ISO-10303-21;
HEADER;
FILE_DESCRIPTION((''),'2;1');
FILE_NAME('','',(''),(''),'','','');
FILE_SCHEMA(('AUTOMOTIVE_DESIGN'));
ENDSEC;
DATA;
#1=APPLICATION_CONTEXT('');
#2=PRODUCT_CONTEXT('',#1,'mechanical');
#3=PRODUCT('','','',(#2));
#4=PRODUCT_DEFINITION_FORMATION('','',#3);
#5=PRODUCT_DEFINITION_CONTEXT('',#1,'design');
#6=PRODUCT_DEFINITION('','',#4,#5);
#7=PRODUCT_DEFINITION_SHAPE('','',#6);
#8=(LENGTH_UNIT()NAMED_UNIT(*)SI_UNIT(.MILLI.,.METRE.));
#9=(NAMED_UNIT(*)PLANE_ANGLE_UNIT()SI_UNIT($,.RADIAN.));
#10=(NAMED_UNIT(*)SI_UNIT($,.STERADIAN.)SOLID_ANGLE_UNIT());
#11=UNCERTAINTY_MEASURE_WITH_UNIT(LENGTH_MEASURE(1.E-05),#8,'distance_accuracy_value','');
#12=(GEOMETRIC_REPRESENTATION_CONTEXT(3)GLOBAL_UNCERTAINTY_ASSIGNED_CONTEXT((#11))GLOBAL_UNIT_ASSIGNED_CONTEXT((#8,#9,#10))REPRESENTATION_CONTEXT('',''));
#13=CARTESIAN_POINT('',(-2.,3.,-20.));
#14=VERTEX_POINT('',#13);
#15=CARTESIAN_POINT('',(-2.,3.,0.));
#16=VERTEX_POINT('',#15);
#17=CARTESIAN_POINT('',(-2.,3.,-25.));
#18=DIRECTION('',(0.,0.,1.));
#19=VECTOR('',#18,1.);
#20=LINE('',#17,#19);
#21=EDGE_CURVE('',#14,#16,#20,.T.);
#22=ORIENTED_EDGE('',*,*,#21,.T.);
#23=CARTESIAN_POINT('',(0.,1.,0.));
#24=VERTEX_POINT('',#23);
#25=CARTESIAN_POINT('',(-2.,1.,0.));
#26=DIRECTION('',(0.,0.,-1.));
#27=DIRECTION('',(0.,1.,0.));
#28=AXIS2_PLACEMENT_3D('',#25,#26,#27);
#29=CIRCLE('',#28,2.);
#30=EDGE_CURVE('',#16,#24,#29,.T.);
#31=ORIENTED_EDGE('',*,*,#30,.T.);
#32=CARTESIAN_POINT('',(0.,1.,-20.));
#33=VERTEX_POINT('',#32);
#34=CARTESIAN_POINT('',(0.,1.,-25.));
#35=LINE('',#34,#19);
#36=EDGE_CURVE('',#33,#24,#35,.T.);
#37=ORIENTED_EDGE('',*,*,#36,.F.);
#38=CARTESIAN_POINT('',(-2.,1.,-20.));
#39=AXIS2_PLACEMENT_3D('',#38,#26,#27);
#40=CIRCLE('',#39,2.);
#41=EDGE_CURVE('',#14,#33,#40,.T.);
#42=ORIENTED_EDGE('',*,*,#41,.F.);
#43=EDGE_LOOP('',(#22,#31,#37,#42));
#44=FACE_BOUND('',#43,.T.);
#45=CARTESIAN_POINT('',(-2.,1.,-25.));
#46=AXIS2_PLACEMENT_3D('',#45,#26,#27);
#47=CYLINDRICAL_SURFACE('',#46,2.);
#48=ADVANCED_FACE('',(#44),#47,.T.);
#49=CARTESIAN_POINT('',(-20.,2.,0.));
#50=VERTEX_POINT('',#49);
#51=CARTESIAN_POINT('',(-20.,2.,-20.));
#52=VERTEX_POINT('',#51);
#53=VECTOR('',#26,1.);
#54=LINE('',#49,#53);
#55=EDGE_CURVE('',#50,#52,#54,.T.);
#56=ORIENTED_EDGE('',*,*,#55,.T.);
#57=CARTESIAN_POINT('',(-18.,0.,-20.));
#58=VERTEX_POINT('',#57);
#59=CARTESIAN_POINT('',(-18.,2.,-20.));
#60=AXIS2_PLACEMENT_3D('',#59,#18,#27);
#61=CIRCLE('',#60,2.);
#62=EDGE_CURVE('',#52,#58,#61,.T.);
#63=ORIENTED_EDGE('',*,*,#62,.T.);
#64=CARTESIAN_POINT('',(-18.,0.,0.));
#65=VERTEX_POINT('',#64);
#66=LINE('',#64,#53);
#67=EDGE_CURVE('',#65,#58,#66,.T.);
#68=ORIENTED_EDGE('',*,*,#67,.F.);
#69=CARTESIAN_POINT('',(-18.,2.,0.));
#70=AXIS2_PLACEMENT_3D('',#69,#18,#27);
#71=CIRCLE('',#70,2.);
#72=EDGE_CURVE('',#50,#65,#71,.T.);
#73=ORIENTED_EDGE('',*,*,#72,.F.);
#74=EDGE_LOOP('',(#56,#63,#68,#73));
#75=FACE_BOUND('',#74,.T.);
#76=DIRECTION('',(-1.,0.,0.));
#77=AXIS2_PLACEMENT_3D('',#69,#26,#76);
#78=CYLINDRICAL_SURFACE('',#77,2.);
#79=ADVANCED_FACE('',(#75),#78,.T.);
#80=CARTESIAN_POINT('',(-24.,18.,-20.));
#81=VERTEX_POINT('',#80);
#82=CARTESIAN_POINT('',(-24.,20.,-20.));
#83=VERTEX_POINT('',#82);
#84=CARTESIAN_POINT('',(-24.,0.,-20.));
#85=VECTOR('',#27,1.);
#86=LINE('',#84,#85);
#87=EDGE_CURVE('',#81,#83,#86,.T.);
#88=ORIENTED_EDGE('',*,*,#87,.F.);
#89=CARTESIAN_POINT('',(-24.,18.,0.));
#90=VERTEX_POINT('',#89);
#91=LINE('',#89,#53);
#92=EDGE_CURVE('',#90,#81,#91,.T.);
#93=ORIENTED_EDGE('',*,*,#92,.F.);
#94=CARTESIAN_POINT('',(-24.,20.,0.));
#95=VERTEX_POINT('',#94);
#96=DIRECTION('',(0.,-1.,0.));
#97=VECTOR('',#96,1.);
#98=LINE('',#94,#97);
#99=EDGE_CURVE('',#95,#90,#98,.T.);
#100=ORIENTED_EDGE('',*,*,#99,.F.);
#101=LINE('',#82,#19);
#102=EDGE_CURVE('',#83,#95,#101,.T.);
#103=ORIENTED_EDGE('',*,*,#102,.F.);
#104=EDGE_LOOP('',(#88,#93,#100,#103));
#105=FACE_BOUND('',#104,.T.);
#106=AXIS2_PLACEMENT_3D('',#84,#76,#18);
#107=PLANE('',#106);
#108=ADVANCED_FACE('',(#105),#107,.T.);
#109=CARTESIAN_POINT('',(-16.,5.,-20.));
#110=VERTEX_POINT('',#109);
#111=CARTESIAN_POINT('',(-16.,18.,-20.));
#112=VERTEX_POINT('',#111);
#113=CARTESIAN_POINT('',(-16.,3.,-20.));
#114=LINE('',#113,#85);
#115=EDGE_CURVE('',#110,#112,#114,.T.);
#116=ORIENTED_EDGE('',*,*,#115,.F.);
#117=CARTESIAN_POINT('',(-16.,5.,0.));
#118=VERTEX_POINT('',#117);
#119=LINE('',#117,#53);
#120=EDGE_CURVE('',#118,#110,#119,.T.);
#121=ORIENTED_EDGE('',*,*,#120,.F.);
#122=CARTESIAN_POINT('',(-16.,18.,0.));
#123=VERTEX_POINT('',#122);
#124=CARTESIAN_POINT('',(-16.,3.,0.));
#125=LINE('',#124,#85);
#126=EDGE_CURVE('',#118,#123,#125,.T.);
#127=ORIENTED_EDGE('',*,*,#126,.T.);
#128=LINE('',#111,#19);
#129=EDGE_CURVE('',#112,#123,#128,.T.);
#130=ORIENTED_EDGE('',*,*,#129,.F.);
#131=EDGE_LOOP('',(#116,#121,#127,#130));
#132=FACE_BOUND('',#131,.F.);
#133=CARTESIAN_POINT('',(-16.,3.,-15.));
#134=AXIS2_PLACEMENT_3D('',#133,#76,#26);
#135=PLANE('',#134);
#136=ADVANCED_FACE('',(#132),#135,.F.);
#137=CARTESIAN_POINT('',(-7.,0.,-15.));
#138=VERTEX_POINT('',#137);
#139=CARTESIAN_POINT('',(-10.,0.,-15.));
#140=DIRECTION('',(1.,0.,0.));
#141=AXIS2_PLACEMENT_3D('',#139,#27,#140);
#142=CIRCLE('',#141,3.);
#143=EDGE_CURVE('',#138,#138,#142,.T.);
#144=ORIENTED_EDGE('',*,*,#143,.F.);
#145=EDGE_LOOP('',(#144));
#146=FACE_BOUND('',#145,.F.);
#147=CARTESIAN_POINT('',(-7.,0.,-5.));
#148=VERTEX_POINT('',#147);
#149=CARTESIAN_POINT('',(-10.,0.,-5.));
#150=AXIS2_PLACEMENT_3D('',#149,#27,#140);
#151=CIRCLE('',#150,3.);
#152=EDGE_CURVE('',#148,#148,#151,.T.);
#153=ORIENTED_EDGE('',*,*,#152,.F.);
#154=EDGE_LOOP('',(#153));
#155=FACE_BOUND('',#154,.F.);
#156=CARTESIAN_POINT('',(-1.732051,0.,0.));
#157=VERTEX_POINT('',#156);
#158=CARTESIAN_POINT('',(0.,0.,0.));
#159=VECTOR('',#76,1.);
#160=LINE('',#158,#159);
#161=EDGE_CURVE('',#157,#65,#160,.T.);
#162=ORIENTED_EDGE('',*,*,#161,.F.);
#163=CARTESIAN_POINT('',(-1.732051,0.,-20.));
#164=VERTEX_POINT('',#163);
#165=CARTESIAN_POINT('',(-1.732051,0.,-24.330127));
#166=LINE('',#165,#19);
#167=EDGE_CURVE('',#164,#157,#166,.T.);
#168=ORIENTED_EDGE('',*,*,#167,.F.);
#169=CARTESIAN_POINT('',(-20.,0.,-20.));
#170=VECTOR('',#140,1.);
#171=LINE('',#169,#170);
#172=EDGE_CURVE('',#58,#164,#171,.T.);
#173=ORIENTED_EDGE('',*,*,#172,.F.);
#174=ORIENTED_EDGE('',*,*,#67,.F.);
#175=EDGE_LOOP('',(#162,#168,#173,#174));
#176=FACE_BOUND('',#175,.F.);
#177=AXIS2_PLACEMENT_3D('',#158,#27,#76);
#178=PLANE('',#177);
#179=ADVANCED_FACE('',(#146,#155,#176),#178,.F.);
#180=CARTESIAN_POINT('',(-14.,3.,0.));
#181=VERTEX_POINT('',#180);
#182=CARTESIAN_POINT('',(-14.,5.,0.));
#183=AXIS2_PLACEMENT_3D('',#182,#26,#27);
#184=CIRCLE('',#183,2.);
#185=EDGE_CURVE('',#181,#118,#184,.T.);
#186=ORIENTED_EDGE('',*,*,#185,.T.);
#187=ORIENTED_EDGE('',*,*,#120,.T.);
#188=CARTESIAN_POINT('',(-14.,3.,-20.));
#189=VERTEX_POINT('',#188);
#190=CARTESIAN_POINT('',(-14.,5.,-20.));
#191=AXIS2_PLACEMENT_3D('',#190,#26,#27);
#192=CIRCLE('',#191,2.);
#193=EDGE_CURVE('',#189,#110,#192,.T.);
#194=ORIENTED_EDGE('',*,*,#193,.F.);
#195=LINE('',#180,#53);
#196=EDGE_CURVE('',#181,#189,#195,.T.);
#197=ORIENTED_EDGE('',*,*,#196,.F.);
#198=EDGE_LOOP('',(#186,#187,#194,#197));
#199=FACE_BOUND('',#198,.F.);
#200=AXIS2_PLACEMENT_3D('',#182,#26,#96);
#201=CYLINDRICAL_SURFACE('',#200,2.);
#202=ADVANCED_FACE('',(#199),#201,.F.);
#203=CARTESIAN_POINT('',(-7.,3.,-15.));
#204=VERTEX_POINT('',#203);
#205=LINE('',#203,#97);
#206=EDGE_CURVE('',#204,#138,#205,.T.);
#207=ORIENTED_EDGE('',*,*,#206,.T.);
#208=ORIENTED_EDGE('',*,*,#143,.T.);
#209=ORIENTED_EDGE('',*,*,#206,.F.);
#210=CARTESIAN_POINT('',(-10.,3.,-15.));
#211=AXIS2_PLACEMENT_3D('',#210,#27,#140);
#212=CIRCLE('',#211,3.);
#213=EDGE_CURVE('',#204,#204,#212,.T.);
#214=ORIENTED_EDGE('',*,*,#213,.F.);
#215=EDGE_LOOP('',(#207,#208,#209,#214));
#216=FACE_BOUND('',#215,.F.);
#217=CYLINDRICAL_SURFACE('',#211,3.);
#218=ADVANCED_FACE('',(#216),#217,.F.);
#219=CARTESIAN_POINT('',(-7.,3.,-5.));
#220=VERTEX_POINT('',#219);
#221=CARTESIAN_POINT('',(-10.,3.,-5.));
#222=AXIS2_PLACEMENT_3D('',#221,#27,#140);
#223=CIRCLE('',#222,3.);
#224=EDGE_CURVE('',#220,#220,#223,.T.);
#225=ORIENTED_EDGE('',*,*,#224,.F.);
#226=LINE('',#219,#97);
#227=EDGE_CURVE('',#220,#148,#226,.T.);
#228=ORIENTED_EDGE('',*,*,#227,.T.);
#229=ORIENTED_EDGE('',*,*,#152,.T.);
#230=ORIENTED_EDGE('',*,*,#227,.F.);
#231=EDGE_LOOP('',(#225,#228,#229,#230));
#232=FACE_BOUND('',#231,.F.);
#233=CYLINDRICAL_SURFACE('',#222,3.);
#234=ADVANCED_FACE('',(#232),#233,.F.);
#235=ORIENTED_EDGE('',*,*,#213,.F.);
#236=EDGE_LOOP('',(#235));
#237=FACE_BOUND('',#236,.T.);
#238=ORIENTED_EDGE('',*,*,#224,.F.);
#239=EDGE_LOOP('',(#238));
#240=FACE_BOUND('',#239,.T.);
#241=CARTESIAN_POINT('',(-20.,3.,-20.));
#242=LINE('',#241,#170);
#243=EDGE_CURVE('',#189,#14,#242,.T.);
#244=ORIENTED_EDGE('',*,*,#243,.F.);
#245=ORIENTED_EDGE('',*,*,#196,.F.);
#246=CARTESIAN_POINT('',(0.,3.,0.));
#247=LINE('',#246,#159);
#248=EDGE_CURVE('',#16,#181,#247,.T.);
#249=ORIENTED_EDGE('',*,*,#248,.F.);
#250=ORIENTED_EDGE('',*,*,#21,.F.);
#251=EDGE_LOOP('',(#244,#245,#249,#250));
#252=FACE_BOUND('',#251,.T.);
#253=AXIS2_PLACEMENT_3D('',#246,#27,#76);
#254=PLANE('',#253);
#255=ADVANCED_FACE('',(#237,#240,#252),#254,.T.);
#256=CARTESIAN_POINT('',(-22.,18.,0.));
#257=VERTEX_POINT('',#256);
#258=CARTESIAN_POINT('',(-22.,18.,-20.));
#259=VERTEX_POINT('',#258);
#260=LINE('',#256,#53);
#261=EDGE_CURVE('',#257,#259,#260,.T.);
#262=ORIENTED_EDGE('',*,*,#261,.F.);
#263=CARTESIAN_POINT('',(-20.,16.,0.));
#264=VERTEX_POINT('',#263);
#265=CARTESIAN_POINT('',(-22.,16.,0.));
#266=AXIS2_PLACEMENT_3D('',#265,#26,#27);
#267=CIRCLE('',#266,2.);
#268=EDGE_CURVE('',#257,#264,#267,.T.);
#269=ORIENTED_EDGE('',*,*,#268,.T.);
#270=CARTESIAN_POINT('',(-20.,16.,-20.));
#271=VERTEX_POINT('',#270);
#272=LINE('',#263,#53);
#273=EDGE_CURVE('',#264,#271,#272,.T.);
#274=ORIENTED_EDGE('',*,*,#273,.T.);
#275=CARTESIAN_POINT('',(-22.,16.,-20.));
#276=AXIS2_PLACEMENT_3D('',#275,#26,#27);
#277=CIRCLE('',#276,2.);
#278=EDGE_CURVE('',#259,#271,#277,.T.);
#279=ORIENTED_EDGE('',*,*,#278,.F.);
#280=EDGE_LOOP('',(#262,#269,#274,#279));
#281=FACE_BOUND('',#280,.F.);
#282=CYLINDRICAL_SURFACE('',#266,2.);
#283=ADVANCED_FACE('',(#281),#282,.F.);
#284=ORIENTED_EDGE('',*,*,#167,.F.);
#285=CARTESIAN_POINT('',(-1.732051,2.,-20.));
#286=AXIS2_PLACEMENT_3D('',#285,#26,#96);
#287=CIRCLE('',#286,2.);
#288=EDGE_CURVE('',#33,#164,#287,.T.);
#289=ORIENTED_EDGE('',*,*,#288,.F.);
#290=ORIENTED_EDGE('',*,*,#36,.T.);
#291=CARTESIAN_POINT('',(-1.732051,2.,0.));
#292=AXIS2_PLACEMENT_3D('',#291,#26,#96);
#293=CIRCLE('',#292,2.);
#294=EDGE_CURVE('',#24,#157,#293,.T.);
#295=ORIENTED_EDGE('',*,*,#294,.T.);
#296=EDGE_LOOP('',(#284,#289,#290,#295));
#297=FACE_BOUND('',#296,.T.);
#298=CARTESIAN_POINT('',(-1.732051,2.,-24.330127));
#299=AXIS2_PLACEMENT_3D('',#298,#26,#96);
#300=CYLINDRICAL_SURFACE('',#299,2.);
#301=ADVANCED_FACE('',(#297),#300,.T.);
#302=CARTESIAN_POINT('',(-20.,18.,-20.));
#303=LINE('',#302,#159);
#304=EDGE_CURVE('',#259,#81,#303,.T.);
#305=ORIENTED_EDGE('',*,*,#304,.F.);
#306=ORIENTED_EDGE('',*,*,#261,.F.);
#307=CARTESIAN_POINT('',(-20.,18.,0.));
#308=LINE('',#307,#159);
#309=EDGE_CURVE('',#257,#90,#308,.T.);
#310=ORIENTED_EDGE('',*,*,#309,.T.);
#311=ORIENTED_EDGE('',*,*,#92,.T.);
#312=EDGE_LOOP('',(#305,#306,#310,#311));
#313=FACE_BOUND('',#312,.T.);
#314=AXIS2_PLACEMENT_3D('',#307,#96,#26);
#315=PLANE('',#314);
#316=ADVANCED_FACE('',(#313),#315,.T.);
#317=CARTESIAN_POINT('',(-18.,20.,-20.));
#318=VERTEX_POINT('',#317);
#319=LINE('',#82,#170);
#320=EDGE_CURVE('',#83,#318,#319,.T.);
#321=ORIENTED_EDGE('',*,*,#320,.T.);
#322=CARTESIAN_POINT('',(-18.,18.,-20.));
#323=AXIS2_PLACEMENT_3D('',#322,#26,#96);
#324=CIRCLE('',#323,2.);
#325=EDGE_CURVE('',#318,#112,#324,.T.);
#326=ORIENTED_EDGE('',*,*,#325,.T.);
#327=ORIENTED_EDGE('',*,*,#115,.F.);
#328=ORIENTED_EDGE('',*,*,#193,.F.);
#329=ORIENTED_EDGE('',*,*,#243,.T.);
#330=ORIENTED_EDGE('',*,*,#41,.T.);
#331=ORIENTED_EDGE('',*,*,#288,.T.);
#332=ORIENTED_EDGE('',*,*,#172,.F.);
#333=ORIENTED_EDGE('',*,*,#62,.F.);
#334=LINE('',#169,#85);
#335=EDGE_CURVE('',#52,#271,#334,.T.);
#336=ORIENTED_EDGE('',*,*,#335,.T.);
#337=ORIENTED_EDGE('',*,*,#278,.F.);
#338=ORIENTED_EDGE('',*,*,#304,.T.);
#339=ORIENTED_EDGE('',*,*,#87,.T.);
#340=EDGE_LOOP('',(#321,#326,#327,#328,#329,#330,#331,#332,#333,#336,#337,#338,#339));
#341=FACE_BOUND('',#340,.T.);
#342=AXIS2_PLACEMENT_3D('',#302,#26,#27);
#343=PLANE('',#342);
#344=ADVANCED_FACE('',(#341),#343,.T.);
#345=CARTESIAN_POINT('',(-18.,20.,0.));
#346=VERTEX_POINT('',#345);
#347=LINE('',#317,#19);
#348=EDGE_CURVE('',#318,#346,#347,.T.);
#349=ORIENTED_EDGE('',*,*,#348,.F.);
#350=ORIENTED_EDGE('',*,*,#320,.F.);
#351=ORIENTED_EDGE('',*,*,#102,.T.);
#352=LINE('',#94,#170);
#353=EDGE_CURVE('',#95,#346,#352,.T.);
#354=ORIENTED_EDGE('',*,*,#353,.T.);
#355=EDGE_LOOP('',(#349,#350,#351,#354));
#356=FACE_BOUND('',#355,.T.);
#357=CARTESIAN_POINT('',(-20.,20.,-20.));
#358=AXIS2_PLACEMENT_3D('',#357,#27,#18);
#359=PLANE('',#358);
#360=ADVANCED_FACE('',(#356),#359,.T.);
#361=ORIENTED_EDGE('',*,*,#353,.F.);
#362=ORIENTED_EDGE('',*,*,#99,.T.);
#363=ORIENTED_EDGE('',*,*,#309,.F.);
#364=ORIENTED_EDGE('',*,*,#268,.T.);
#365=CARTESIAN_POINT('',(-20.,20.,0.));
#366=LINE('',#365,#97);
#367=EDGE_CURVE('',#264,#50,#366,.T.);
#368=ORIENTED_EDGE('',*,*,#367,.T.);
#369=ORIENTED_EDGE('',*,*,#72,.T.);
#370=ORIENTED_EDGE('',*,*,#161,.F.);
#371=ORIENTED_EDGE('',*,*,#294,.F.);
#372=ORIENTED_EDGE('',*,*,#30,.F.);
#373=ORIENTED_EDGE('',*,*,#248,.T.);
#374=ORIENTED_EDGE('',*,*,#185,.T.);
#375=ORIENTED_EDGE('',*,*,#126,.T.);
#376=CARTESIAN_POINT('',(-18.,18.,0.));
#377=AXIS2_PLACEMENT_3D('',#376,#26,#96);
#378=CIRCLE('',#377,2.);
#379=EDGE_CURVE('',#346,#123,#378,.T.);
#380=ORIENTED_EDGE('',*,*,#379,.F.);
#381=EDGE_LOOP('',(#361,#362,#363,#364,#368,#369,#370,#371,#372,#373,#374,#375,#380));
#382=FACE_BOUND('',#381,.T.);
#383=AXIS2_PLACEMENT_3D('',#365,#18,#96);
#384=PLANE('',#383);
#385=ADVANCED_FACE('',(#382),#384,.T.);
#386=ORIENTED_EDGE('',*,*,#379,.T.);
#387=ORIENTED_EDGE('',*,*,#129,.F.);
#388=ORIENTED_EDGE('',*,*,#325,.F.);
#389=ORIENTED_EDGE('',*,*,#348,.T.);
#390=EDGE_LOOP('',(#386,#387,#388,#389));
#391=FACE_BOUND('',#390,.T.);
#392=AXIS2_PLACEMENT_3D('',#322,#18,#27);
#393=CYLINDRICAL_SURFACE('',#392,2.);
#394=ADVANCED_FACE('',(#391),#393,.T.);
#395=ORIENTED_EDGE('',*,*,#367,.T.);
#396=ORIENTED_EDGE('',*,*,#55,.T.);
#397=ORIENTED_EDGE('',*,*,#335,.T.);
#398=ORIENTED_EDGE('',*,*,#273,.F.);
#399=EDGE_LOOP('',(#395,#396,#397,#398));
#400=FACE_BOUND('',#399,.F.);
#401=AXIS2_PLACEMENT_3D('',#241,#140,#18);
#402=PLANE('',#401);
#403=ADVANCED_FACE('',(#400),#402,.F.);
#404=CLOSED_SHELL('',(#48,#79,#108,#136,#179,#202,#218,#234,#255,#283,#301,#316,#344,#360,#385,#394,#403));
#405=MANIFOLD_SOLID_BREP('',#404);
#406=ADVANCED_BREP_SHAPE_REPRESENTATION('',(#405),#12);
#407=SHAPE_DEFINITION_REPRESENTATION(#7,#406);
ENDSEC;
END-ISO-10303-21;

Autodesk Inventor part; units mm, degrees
ref_plane "YZ Plane" through (0, 0, 0) normal (1, 0, 0) x (0, 1, 0)
ref_plane "XZ Plane" through (0, 0, 0) normal (0, 1, 0) x (-1, 0, 0)
ref_plane "XY Plane" through (0, 0, 0) normal (0, 0, 1) x (1, 0, 0)
sketch "Sketch1" plane through (0, 0, 0) normal (0, 1, 0) x (-1, 0, 0)
  line L0 (0, 0) -> (20, 0)
  line L1 (20, 0) -> (20, -20)
  line L2 (20, -20) -> (0, -20)
  line L3 (0, -20) -> (0, 0)
  dimension "d0" = 20
  dimension "d1" = 20
extrude "Extrusion1" add sketch "Sketch1" along normal blind 3
sketch "Sketch2" plane through (0, 3, 0) normal (0, 1, 0) x (1, 0, 0)
  circle A0 centre (-10, 15) radius 3
  line L0 (0, 0) -> (0, 20) projected
  line L1 (0, 20) -> (-20, 20) projected
  circle A1 centre (-10, 5) radius 3
  dimension "d4" = 6
  dimension "d5" = 10
  dimension "d6" = 5
  dimension "d23" = 6
  dimension "d24" = 10
  dimension "d25" = 10
extrude "Extrusion2" cut sketch "Sketch2" against normal through all
sketch "Sketch3" plane through (0, 3, 0) normal (0, 1, 0) x (1, 0, 0)
  circle A0 centre (-10, 15) radius 3 projected
  circle A1 centre (-10, 15) radius 5
  line L0 (-10, 15) -> (-18, 15)
  line L1 (0, 20) -> (-20, 20) projected
  line L2 (-20, 0) -> (-16, 0)
  line L3 (-16, 0) -> (-16, 20)
  line L4 (-16, 20) -> (-20, 20)
  line L5 (-20, 20) -> (-20, 0)
  line L6 (0, 0) -> (0, 20) projected
  dimension "d9" = 10
  dimension "d10" = 8
  dimension "d11" = 4
  dimension "d26" = 20
  dimension "d27" = 20
extrude "Extrusion3" add sketch "Sketch3" along normal blind 17 contours L3 L2 L5 L1
sketch "Sketch4" plane through (-20, 0, -20) normal (-1, 0, 0) x (0, 0, 1)
  line L0 (0, 0) -> (0, 20) projected
  line L1 (0, 20) -> (20, 20)
  line L2 (20, 20) -> (20, 18)
  line L3 (20, 18) -> (0, 18)
  line L4 (0, 18) -> (0, 20)
  point P0 (20, 0)
  dimension "d14" = 20
  dimension "d15" = 2
extrude "Extrusion4" add sketch "Sketch4" along normal blind 4
fillet "Fillet1" radius 2 1 edges at (-16, 20, -10)
fillet "Fillet2" radius 2 1 edges at (-20, 18, -10)
fillet "Fillet3" radius 2 1 edges at (-20, 0, -10)
fillet "Fillet4" radius 2 1 edges at (-16, 3, -10)
fillet "Fillet5" radius 2 2 edges at (0, 3, -10) (0, 0, -10)
properties part number "CableGuide"
